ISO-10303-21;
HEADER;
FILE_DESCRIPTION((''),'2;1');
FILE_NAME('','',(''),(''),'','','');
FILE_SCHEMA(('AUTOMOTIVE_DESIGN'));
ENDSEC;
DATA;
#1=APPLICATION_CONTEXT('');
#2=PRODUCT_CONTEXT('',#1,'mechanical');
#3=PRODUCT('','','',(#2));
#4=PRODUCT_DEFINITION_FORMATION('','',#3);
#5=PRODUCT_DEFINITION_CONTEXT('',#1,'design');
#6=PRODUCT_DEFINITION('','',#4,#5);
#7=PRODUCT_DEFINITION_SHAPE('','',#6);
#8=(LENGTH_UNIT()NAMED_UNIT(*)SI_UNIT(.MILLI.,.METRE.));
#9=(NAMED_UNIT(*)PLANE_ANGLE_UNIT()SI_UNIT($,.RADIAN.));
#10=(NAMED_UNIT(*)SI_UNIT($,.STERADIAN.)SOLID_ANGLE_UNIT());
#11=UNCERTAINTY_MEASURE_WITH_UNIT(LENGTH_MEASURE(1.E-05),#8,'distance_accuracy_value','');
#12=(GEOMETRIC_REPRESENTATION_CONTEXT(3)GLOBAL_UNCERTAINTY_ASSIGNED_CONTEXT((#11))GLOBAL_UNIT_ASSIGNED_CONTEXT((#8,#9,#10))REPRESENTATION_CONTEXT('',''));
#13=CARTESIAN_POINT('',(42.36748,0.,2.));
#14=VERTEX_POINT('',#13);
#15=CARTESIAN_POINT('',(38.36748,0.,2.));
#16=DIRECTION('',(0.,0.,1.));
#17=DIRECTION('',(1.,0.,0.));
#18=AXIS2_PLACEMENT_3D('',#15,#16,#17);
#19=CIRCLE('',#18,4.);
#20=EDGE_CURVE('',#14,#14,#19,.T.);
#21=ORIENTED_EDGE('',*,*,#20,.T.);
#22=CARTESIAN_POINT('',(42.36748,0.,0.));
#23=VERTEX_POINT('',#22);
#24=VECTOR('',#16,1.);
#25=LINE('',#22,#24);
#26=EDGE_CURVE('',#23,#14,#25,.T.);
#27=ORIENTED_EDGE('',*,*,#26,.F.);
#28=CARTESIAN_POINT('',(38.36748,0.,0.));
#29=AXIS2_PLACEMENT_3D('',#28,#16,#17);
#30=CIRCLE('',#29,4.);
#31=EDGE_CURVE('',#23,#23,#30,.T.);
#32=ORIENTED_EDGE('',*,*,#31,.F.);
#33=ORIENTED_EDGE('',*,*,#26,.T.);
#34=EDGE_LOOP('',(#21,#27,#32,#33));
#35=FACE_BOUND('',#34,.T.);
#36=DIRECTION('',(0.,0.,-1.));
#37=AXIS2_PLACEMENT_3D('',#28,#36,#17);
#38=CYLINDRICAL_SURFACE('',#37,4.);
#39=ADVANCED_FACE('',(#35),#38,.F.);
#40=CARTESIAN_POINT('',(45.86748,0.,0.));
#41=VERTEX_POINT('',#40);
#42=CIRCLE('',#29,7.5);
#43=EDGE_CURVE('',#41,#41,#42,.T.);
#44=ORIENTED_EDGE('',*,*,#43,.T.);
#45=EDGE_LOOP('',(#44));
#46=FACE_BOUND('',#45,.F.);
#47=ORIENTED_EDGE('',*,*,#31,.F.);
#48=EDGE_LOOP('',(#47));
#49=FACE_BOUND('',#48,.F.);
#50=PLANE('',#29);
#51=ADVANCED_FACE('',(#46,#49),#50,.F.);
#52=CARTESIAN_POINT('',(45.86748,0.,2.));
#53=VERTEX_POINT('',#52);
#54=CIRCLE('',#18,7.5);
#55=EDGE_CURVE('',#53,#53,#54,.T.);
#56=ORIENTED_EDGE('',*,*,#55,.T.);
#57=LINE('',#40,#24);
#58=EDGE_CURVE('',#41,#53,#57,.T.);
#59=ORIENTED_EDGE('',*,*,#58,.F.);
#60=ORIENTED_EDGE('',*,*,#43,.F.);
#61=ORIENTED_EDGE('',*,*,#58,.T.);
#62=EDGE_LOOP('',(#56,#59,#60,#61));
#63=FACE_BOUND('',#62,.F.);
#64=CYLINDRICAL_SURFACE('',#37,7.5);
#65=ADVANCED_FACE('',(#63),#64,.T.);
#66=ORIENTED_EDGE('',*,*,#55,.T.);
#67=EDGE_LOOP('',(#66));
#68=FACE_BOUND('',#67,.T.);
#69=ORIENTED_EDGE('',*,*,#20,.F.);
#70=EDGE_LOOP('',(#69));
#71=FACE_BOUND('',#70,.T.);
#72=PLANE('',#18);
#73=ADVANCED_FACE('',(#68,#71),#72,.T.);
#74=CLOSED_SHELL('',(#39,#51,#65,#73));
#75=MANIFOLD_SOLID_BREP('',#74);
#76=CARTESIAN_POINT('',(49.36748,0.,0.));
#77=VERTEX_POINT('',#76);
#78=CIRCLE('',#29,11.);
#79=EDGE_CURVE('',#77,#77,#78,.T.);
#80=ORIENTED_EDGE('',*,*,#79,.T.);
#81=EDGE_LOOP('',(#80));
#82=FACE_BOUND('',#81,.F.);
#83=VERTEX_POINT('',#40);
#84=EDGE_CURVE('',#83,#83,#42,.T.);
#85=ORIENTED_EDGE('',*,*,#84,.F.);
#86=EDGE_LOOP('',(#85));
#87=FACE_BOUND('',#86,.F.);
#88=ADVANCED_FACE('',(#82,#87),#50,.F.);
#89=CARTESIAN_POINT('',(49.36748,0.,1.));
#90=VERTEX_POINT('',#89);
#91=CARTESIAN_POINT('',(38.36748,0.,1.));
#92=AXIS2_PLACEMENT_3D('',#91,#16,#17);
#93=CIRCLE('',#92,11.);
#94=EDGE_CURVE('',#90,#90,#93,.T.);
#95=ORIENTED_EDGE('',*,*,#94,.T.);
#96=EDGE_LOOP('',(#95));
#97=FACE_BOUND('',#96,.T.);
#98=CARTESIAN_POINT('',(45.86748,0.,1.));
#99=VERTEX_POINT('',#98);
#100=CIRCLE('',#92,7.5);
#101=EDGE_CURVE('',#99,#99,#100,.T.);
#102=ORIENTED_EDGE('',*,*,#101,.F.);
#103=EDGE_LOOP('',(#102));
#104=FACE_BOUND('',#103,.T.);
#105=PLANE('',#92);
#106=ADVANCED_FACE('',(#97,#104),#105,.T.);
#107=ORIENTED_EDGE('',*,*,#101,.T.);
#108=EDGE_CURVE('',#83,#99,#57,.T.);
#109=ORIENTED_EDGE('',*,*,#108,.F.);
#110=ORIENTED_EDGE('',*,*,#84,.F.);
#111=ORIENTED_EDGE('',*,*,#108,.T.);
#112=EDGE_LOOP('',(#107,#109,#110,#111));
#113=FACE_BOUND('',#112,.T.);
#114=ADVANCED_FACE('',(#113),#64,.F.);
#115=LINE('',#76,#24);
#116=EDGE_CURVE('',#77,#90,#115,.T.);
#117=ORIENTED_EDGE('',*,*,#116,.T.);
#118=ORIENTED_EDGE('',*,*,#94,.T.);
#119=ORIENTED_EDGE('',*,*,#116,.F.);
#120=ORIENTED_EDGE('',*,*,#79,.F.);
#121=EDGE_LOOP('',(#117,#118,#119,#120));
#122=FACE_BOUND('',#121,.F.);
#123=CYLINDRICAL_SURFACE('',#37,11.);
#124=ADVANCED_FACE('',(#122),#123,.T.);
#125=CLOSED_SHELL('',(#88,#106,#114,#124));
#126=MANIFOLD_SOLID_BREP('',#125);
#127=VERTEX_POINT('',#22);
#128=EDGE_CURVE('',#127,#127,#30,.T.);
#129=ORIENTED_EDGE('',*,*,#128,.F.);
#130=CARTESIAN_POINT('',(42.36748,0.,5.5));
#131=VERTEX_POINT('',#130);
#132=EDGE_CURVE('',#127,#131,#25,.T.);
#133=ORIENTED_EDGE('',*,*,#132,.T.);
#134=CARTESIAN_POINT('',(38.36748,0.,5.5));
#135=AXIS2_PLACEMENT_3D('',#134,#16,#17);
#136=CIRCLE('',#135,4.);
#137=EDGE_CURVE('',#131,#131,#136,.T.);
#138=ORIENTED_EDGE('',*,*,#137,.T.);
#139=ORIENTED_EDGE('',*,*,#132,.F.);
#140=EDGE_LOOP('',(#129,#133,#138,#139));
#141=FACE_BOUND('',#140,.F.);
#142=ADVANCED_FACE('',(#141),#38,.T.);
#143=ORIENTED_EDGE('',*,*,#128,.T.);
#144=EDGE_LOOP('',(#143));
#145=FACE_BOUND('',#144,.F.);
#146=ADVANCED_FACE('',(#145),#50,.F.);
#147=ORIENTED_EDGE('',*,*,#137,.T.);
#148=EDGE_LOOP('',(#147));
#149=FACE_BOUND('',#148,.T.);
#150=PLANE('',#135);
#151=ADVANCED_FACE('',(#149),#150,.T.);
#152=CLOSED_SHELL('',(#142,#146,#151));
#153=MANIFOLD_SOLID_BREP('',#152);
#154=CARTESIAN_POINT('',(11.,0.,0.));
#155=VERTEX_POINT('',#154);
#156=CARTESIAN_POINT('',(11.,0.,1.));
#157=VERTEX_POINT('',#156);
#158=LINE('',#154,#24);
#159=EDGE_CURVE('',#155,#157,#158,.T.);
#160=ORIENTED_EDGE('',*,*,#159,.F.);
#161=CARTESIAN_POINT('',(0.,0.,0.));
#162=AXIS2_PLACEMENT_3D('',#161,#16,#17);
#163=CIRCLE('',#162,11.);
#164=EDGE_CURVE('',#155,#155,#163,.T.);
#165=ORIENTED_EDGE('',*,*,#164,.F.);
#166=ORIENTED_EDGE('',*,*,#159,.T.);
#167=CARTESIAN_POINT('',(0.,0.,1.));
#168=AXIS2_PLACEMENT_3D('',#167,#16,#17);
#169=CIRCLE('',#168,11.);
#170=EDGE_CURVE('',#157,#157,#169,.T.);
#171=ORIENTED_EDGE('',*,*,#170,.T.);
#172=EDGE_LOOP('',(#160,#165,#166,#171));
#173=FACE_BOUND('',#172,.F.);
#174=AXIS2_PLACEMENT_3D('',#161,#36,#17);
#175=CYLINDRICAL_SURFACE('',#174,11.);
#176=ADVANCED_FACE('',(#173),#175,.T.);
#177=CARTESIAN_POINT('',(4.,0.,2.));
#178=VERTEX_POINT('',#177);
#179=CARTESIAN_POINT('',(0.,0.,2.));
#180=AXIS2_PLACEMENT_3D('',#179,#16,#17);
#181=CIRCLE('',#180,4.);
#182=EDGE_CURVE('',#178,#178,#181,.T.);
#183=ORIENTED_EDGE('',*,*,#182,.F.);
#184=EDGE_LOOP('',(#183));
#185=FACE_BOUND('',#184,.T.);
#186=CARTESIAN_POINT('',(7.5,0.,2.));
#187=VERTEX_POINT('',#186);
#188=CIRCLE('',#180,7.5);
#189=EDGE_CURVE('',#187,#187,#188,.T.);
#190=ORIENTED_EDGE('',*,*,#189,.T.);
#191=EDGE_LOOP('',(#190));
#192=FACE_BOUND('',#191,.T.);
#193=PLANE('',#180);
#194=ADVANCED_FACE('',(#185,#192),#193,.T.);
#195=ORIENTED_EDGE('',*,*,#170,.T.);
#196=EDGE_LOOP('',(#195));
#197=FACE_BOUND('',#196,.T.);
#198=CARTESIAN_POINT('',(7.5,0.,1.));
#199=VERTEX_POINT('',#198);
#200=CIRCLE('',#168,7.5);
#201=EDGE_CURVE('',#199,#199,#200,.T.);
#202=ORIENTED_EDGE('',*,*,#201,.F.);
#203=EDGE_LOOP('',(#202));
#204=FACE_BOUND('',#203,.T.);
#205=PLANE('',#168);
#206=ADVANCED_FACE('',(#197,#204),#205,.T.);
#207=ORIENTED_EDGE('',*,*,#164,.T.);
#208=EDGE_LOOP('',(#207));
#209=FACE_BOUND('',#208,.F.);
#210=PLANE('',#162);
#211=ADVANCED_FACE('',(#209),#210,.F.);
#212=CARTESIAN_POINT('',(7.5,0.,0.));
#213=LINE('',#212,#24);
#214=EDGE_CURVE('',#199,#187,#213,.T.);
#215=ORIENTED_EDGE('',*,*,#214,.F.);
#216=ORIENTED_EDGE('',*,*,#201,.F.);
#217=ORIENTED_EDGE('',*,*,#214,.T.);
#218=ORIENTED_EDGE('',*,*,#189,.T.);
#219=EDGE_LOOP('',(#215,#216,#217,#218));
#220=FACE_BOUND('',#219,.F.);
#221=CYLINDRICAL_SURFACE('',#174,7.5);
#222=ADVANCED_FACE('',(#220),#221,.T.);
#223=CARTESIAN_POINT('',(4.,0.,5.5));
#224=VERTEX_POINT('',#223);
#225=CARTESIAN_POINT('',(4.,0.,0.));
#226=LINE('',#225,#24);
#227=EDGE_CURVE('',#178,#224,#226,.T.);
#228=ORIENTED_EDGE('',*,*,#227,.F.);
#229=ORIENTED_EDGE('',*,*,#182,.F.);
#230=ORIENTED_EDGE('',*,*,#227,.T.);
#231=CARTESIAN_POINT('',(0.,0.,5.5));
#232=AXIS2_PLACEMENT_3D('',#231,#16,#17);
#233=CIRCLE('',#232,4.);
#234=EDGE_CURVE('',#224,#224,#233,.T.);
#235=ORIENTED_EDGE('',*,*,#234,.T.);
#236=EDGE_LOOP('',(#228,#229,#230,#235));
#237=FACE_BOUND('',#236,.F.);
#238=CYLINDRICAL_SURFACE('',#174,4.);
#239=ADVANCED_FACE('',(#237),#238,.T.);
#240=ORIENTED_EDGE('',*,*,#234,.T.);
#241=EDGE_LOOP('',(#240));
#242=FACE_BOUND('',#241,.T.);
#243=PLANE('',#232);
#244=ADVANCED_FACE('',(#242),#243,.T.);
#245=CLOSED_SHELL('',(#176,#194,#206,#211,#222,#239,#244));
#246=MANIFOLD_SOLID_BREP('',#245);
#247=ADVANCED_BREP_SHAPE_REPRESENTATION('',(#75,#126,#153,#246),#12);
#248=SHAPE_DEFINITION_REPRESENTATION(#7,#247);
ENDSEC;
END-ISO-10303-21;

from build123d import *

# Parameters (mm, degrees)
F0_R     = 11
F0_R_2   = 7.5
F1_DEPTH = 1
F0_R_3   = 4
F2_DEPTH = 2
F3_DEPTH = 5.5


with BuildPart() as f1:
    # F0 (on Top) → F1 (new body)
    with BuildSketch(Plane.XY):
        Circle(F0_R)
        Circle(F0_R_2, mode=Mode.SUBTRACT)
    extrude(amount=F1_DEPTH)

    # F0 (on Top) → F2 (join)
    with BuildSketch(Plane.XY):
        Circle(F0_R_2)
        Circle(F0_R_3, mode=Mode.SUBTRACT)
    extrude(amount=F2_DEPTH)

    # F0 (on Top) → F3 (join)
    with BuildSketch(Plane.XY):
        Circle(F0_R_3)
    extrude(amount=F3_DEPTH)


with BuildPart() as f1b:
    # F0 (on Top) → F1, piece 2 (new body)
    with BuildSketch(Plane.XY):
        with Locations((38.3674800396, 0)):
            Circle(F0_R)
        with Locations((38.3674800396, 0)):
            Circle(F0_R_2, mode=Mode.SUBTRACT)
    extrude(amount=F1_DEPTH)


with BuildPart() as f2:
    # F0 (on Top) → F2, piece 2 (new body)
    with BuildSketch(Plane.XY):
        with Locations((38.3674800396, 0)):
            Circle(F0_R_2)
        with Locations((38.3674800396, 0)):
            Circle(F0_R_3, mode=Mode.SUBTRACT)
    extrude(amount=F2_DEPTH)


with BuildPart() as f3:
    # F0 (on Top) → F3, piece 2 (new body)
    with BuildSketch(Plane.XY):
        with Locations((38.3674800396, 0)):
            Circle(F0_R_3)
    extrude(amount=F3_DEPTH)


solid = Compound([f1.part, f1b.part, f2.part, f3.part])
